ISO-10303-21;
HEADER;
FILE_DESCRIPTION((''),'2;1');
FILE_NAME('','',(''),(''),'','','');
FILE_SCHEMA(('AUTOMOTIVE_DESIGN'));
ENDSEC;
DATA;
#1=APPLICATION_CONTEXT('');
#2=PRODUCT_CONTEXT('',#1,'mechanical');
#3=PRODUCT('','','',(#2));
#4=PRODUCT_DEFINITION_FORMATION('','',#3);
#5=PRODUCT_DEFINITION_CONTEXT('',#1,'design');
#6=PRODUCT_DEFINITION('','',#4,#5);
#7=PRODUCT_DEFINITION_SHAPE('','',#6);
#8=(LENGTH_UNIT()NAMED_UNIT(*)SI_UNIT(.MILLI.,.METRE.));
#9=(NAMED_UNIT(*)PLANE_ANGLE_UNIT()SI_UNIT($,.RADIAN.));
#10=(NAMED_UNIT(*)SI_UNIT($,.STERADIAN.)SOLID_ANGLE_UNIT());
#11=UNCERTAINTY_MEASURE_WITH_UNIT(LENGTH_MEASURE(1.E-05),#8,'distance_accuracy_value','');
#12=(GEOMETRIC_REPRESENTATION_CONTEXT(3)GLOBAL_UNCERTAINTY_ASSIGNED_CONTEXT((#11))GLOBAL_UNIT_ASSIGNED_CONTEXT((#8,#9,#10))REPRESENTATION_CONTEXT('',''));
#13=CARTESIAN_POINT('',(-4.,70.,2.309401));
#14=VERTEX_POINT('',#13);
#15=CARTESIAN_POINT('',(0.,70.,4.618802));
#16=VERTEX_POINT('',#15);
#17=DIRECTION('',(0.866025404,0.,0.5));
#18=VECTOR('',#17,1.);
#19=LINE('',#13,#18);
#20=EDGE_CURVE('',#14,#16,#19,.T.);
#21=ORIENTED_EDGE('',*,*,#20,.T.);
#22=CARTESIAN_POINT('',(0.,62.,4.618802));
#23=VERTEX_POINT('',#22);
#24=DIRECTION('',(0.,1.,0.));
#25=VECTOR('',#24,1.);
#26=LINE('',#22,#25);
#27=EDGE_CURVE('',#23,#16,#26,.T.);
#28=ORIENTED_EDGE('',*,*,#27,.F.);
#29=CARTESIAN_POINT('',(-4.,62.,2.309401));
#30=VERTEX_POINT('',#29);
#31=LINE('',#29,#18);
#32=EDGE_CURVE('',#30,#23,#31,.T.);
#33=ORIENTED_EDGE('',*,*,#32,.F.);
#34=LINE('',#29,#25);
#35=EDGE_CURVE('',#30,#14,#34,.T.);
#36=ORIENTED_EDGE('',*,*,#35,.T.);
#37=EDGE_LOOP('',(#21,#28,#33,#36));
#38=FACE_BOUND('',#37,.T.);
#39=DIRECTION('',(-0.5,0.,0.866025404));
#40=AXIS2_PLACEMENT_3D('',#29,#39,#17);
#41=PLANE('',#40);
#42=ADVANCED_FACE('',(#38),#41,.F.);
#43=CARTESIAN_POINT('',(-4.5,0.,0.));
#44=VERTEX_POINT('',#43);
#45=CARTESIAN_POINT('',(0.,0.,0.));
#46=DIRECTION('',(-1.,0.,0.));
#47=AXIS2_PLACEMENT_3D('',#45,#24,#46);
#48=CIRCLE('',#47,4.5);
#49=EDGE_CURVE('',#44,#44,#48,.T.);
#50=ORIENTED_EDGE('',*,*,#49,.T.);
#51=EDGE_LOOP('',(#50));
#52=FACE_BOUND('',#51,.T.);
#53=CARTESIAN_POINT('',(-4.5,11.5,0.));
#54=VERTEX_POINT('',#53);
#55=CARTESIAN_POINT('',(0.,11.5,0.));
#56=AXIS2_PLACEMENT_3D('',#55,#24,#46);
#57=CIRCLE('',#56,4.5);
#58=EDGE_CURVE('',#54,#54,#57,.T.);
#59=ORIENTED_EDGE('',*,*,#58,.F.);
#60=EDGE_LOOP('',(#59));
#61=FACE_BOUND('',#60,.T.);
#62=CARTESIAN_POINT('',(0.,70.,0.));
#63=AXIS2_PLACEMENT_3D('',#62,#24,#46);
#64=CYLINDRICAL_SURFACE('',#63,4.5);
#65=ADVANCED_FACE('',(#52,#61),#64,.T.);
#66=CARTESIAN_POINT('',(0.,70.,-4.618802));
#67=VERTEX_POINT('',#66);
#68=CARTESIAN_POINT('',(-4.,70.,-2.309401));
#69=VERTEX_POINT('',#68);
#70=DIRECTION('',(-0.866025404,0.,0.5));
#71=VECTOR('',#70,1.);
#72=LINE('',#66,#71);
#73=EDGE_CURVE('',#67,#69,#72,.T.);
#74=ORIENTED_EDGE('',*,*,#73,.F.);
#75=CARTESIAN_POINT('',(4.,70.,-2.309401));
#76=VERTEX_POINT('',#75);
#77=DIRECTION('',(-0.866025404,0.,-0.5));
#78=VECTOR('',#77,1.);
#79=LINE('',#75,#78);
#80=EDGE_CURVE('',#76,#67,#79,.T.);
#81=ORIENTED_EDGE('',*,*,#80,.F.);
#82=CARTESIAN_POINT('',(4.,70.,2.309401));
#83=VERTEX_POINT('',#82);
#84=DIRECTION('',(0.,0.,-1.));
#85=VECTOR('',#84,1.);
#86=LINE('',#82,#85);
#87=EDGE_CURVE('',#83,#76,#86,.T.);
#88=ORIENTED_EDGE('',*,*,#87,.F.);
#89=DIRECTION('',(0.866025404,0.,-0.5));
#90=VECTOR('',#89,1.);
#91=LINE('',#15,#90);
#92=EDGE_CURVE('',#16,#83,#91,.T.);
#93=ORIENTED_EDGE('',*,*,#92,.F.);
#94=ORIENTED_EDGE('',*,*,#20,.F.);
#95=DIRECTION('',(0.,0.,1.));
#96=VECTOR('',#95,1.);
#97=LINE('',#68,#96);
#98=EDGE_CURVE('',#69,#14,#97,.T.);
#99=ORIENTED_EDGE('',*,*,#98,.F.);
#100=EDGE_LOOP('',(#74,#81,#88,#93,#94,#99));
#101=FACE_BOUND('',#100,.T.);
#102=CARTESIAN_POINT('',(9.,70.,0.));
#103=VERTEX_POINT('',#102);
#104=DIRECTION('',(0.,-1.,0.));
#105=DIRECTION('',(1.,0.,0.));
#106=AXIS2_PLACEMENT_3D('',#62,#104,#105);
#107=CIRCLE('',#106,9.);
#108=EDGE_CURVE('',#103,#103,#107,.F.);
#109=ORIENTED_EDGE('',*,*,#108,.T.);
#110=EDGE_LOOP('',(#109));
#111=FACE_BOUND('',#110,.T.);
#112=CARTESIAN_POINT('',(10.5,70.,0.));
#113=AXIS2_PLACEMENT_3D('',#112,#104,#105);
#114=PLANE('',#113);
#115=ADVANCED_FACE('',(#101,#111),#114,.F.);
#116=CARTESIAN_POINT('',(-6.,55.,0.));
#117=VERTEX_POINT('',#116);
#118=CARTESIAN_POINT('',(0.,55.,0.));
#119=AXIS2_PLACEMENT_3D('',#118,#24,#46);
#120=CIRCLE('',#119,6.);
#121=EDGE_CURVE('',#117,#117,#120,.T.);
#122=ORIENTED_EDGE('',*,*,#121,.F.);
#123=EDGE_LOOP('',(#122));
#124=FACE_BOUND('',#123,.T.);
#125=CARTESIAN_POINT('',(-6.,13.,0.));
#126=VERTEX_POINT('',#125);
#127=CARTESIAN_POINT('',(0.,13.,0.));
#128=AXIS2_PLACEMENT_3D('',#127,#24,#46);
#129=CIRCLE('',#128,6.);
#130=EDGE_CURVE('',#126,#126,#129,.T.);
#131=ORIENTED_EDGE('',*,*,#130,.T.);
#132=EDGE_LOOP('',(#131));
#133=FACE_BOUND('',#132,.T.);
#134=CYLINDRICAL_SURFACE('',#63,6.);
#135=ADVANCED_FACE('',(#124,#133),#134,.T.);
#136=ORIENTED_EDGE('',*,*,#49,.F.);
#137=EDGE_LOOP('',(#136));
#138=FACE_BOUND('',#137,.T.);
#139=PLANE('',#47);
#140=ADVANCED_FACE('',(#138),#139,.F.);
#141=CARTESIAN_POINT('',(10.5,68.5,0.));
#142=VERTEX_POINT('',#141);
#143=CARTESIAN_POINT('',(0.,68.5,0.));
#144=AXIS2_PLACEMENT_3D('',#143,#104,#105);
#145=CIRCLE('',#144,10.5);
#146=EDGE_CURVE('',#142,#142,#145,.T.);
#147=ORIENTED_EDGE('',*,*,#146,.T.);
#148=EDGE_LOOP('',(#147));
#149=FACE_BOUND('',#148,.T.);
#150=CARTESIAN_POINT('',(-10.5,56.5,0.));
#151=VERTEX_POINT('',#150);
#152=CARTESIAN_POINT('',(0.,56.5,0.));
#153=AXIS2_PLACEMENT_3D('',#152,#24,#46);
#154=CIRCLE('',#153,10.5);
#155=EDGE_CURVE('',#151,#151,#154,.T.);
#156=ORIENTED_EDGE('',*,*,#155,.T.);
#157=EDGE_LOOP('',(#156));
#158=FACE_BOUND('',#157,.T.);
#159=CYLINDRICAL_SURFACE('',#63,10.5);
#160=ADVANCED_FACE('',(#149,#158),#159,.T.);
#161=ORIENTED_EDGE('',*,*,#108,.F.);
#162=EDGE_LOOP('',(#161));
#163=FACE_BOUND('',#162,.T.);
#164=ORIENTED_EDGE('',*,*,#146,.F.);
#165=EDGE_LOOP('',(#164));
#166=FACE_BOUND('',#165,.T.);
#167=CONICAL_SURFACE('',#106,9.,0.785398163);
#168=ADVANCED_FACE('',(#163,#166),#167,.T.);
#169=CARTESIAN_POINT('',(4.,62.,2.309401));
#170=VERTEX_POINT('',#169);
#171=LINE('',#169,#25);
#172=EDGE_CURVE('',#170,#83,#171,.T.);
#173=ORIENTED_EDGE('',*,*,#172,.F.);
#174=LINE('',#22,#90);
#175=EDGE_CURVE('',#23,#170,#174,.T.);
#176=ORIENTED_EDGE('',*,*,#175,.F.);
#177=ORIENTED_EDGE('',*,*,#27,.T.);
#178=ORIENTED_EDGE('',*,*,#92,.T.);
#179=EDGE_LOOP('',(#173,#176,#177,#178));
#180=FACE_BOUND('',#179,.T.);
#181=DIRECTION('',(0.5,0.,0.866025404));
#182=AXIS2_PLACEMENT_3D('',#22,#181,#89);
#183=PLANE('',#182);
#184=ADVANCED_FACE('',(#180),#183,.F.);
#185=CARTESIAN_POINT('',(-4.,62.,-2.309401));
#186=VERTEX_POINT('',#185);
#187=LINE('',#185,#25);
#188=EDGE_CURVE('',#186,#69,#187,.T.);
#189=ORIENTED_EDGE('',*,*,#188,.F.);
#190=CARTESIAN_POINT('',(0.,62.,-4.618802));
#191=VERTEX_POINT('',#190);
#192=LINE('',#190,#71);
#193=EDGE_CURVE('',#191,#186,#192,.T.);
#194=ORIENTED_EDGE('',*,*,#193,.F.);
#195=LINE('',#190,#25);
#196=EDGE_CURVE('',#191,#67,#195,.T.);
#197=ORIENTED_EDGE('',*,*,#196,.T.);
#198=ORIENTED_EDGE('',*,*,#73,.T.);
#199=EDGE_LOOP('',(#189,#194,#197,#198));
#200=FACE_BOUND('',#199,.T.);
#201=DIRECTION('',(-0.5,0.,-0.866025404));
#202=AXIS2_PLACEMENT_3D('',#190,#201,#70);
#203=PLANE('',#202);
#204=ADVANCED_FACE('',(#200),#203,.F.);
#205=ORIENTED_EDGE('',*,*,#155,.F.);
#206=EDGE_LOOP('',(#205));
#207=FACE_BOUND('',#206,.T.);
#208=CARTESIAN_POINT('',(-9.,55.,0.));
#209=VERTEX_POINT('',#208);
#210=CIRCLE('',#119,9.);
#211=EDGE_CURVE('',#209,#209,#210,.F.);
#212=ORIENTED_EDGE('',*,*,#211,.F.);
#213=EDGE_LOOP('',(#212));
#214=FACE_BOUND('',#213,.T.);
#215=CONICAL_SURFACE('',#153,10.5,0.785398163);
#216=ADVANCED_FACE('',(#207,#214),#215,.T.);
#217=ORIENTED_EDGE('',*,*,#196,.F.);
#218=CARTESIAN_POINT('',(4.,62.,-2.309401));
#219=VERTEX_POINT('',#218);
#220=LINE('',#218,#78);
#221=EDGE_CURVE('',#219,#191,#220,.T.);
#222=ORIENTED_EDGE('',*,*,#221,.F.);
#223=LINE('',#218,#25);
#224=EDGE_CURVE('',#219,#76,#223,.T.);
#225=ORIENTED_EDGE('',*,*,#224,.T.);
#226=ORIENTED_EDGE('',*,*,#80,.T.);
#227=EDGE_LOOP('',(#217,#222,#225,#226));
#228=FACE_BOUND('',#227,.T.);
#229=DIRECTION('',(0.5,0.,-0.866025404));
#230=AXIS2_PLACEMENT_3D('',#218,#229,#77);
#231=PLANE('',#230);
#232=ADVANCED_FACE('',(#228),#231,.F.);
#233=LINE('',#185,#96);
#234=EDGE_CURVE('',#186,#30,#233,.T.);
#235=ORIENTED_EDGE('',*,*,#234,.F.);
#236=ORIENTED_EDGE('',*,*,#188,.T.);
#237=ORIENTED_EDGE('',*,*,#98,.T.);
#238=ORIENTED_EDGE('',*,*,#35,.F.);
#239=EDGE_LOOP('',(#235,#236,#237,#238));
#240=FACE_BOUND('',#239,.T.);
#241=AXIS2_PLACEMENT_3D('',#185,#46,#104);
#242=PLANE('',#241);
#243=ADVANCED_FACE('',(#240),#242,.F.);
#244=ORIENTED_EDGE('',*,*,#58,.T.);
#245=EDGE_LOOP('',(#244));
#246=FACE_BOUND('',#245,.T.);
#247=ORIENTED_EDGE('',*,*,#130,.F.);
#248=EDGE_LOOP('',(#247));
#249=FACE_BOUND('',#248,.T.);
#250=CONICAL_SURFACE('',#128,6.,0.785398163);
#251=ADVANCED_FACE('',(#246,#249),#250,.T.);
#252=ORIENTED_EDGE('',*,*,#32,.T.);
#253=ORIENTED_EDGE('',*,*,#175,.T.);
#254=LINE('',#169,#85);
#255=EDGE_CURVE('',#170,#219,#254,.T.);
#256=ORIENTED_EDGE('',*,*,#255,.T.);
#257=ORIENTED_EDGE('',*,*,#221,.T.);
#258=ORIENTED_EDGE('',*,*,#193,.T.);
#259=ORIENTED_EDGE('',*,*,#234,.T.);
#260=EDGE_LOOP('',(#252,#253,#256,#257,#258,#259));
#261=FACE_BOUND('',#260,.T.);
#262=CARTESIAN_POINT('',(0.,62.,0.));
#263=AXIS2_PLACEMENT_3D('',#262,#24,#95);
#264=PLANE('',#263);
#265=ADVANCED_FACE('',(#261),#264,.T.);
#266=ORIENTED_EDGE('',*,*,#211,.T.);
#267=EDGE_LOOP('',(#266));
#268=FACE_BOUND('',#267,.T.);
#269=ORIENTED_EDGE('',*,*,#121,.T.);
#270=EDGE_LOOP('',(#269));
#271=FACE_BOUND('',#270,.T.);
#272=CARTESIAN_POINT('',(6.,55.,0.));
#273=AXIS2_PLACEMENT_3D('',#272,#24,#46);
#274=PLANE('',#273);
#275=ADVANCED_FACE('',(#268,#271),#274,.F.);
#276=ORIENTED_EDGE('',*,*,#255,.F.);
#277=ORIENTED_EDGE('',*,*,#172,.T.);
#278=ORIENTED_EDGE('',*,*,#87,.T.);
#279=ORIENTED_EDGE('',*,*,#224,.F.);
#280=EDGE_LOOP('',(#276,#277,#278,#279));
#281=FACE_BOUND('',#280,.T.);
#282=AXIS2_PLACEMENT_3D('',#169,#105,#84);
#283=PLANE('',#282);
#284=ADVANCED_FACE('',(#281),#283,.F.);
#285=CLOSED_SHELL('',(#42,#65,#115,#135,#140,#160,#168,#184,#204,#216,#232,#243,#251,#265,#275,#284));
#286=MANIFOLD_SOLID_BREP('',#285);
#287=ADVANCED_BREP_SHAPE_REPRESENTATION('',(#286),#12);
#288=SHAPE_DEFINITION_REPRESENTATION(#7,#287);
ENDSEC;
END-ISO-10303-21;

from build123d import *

# Parameters (mm, degrees)
CHAMFER1_SIZE      = 1.5
CUT_EXTRUDE1_DEPTH = 8


with BuildPart() as part:
    # Sketch1 → Revolve1 (revolve)
    with BuildSketch(Plane.XY, mode=Mode.PRIVATE) as revolve1_sk:
        Polygon((0, 0), (4.5, 0), (4.5, 11.5), (6, 11.5), (6, 55), (10.5, 55), (10.5, 70), (0, 70), align=None)
    revolve(revolve1_sk.sketch.rotate(Axis((0, 70, 0), (0, -1, 0)), 180), axis=Axis((0, 70, 0), (0, -1, 0)))

    # Chamfer1
    chamfer1_edges = [part.edges().sort_by_distance(p)[0] for p in [
        (10.5, 70, 0),
        (10.5, 55, 0),
        (6, 11.5, 0),
    ]]
    chamfer(chamfer1_edges, length=CHAMFER1_SIZE - 0.0001)  # a hair under: the kernel refuses the full size

    # Sketch2 → Cut-Extrude1 (cut)
    with BuildSketch(Plane(origin=(0, 70, 0), x_dir=(1, 0, 0), z_dir=(0, 1, 0))):
        Polygon((0, 4.618802154), (-4, 2.309401077), (-4, -2.309401077), (0, -4.618802154), (4, -2.309401077), (4, 2.309401077), align=None)
    extrude(amount=-CUT_EXTRUDE1_DEPTH, mode=Mode.SUBTRACT)


solid = part.part
